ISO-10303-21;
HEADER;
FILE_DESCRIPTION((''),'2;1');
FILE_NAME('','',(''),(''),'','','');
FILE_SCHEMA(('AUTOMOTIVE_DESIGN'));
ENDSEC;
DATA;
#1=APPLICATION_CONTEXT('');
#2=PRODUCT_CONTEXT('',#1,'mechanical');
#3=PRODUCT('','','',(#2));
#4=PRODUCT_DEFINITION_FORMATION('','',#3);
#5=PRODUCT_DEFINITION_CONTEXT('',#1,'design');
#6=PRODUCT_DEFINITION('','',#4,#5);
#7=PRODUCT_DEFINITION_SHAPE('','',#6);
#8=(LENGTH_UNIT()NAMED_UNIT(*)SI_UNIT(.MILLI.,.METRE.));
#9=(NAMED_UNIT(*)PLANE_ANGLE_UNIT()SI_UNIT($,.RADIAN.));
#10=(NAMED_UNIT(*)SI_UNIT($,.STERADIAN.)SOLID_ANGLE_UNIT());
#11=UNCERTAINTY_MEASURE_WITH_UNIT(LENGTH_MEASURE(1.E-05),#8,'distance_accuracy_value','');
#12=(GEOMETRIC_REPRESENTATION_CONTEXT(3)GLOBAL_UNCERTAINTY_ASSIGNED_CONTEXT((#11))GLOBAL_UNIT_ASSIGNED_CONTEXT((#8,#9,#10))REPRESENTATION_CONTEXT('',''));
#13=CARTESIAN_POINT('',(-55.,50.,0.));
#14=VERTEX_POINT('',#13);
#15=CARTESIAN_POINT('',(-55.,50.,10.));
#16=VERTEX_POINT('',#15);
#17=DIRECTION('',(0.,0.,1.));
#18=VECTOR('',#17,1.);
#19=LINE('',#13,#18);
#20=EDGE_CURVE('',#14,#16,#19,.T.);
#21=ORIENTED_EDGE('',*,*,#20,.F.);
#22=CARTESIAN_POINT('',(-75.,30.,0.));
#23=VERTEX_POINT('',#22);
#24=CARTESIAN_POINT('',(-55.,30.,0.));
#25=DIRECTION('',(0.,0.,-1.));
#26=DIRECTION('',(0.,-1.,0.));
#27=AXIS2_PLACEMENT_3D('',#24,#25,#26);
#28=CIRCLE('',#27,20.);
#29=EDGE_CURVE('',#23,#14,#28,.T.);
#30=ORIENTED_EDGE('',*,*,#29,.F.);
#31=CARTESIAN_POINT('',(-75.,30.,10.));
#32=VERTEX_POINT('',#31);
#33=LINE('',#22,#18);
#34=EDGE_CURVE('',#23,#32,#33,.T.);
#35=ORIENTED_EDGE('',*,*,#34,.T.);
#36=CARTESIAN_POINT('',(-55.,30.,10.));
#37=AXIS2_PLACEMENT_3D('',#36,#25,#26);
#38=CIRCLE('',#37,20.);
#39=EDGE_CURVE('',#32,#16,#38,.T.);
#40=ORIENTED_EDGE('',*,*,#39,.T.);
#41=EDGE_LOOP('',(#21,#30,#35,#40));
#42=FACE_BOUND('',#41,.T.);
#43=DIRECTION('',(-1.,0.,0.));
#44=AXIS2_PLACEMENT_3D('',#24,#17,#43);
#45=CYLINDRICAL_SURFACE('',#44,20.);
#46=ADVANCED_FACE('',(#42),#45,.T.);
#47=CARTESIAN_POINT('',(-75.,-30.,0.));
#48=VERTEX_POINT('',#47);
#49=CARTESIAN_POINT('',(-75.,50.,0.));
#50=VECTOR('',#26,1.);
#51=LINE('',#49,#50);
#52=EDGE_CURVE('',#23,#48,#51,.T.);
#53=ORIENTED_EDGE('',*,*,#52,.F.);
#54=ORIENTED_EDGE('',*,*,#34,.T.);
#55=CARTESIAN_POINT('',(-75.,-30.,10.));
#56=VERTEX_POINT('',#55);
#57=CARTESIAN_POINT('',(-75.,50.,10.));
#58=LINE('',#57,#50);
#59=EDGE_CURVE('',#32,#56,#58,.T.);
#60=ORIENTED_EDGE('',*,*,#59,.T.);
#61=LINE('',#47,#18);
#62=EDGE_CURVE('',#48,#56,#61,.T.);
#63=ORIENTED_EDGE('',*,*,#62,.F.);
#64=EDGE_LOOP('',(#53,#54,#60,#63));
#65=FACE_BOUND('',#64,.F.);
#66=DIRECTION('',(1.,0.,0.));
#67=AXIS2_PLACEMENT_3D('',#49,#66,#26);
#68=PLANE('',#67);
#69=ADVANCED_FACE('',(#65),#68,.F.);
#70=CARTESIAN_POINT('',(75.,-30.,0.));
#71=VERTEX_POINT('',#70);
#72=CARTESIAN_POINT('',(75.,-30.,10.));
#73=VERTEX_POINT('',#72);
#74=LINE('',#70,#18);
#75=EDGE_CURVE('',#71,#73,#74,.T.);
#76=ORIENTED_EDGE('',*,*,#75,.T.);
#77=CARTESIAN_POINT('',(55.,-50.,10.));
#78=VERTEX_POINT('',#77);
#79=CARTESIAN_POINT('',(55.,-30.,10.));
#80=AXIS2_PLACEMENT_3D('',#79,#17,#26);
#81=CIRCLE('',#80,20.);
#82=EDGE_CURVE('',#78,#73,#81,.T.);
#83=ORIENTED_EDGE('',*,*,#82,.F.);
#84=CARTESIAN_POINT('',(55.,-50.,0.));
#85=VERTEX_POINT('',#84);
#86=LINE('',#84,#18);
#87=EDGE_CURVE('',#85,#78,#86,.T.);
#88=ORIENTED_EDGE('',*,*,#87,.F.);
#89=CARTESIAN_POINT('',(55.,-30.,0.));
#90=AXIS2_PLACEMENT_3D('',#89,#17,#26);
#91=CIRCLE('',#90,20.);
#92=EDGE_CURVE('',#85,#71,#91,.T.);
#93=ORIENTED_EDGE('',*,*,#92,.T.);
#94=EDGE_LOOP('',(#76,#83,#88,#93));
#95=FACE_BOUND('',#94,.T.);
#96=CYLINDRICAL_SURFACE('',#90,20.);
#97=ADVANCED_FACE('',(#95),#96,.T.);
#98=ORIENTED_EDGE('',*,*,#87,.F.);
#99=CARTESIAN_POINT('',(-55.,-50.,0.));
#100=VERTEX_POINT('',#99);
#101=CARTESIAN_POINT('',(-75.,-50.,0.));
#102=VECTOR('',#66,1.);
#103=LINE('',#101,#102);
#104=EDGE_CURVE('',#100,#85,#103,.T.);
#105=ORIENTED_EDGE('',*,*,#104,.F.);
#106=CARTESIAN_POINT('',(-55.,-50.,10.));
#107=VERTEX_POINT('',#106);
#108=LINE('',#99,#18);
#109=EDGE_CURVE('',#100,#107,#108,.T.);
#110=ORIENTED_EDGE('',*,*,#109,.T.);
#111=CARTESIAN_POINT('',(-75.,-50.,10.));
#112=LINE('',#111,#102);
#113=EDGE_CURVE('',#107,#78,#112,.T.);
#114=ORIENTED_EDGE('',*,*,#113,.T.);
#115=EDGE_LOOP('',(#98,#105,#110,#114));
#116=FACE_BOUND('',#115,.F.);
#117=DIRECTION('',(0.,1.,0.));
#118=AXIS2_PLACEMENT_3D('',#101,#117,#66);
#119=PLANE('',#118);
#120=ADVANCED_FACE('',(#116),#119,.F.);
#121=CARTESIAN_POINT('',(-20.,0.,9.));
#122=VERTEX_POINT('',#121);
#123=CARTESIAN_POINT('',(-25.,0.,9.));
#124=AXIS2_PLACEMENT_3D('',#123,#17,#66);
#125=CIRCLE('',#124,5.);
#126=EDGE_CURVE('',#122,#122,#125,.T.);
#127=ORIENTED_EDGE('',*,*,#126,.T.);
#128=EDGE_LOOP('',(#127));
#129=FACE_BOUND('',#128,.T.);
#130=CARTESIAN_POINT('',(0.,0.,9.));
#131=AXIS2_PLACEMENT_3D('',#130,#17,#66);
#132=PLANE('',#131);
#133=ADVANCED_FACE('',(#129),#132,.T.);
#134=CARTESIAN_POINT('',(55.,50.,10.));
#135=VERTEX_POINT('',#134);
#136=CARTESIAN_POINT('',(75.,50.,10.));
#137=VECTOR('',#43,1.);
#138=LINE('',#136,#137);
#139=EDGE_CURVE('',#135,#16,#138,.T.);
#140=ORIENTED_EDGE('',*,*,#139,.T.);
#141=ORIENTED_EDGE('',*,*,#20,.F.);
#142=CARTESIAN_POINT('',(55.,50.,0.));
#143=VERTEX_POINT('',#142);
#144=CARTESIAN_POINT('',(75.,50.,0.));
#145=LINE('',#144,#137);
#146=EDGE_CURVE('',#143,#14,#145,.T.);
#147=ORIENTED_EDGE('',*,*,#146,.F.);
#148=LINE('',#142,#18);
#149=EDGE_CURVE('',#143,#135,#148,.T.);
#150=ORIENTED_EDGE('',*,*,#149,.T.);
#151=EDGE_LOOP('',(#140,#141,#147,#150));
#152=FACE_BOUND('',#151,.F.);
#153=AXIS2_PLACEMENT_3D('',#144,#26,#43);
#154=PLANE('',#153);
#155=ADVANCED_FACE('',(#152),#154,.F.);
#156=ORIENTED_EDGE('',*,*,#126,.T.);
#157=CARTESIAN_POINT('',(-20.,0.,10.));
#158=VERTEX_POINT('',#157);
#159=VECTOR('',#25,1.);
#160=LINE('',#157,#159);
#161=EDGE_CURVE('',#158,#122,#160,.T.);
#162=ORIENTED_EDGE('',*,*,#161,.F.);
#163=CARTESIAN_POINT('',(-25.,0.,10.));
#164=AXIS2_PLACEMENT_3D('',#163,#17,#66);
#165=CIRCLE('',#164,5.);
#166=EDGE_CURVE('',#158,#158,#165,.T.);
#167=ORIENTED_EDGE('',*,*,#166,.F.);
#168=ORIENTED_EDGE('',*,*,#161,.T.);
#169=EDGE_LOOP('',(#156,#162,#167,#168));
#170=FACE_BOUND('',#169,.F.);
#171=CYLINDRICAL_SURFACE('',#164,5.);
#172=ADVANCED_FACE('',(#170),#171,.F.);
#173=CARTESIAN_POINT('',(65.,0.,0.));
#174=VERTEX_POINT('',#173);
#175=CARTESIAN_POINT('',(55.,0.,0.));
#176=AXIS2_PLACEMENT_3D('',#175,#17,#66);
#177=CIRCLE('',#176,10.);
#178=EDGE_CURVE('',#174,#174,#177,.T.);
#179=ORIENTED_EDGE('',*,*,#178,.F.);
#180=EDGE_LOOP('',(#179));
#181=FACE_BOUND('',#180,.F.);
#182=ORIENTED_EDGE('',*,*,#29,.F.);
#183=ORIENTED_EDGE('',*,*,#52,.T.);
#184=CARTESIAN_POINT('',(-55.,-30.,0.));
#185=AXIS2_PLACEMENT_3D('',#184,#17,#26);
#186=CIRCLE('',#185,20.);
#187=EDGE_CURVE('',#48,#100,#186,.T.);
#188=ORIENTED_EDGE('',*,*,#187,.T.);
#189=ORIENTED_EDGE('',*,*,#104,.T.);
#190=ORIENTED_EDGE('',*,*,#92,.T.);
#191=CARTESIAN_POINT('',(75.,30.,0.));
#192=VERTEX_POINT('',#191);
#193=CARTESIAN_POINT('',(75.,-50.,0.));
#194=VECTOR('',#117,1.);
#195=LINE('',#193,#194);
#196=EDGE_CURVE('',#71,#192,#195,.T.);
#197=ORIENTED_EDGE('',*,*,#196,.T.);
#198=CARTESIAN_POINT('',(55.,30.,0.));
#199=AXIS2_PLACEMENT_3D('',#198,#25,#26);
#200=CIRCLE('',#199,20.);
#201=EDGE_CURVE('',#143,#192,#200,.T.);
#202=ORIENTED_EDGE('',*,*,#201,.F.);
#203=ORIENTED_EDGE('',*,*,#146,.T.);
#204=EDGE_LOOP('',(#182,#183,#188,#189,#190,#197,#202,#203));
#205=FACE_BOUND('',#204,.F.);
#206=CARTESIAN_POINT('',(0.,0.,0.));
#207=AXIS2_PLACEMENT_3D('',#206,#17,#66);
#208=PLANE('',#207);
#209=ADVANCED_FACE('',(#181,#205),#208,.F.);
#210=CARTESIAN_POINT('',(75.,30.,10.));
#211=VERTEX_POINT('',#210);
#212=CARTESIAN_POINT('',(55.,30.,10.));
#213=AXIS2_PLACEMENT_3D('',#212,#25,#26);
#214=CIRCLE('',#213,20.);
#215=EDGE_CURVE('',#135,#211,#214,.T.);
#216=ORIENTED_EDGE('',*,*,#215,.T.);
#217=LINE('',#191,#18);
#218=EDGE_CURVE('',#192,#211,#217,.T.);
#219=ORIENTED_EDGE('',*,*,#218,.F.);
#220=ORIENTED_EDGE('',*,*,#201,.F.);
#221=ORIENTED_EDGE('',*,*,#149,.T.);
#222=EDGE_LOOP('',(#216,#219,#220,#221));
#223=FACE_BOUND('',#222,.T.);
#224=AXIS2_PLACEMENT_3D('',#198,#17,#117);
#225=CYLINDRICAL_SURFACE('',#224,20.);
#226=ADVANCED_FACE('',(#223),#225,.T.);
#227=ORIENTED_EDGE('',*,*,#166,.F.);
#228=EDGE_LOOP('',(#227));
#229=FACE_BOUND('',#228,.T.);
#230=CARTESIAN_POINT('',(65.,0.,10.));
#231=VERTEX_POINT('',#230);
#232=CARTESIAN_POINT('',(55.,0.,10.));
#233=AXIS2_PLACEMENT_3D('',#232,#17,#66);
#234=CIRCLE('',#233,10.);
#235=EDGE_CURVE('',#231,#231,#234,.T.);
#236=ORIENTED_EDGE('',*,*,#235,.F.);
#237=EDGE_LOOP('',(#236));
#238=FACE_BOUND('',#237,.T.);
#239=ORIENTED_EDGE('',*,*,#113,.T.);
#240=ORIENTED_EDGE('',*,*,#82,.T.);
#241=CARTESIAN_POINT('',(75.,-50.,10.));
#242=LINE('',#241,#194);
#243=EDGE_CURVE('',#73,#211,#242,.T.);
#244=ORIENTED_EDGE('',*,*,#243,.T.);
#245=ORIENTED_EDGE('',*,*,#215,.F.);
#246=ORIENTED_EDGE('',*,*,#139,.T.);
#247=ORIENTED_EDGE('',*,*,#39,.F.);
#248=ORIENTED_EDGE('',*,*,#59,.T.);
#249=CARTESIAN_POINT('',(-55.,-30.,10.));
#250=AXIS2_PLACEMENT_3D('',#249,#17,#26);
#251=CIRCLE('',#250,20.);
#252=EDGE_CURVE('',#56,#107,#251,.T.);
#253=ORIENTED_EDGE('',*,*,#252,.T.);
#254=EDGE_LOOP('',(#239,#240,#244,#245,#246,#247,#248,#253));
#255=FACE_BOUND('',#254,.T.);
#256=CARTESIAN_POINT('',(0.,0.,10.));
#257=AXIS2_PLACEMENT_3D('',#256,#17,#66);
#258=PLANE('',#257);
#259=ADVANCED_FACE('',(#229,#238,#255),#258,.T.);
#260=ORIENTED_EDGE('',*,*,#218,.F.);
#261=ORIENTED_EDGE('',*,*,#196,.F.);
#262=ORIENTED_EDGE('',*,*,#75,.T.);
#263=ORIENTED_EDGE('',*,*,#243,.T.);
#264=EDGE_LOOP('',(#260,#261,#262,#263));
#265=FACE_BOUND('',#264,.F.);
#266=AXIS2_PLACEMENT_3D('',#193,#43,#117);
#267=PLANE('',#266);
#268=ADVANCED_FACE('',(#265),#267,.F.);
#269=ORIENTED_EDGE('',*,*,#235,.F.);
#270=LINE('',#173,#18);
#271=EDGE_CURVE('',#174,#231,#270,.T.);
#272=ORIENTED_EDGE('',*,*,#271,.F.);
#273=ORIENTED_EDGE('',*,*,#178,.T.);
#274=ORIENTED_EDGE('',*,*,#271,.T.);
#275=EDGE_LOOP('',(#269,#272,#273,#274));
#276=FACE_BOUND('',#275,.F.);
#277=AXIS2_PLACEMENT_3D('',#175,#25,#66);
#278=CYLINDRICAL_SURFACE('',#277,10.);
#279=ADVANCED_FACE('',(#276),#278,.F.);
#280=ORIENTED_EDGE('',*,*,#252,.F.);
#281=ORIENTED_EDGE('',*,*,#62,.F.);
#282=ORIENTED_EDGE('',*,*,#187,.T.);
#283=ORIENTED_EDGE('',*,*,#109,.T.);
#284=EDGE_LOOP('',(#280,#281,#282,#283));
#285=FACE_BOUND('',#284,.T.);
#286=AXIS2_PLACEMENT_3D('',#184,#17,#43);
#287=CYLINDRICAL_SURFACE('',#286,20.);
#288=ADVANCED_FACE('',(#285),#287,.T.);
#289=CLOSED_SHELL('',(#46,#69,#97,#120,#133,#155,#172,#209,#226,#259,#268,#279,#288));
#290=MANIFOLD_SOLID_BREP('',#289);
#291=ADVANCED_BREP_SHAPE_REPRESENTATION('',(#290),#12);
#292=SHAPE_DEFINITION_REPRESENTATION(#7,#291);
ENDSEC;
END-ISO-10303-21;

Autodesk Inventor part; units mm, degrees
ref_plane "YZ Plane" through (0, 0, 0) normal (1, 0, 0) x (0, 1, 0)
ref_plane "XZ Plane" through (0, 0, 0) normal (0, 1, 0) x (-1, 0, 0)
ref_plane "XY Plane" through (0, 0, 0) normal (0, 0, 1) x (1, 0, 0)
sketch "Sketch1" plane through (0, 0, 0) normal (0, 0, 1) x (1, 0, 0)
  line L0 (-75, -50) -> (75, -50)
  line L1 (75, -50) -> (75, 50)
  line L2 (75, 50) -> (-75, 50)
  line L3 (-75, 50) -> (-75, -50)
  line L4 (-75, -50) -> (75, 50) construction
  line L5 (75, -50) -> (-75, 50) construction
  circle A0 centre (55, -30) radius 10
  circle A1 centre (55, 30) radius 10
  line L6 (0, 0) -> (75, 0) construction
  circle A2 centre (55, 0) radius 10
  dimension "d0" = 150
  dimension "d1" = 100
  dimension "d23" = 20
  dimension "d25" = 20
  dimension "d26" = 20
extrude "Plate1" add sketch "Sketch1" along normal blind 10 contours L3 L2 L1 L0 | A0 | A1
fillet "Corner Round1" radius 20 4 edges at (75, -50, 5) (-75, -50, 5) (-75, 50, 5) (75, 50, 5)
sketch "Sketch5" plane through (0, 0, 10) normal (0, 0, 1) x (1, 0, 0)
  line L0 (55, -50) -> (-55, -50) projected
  line L1 (-75, -30) -> (-75, 30) projected
  line L2 (-55, 50) -> (55, 50) projected
  circle A0 centre (-25, 0) radius 50
  circle A1 centre (-25, 0) radius 5
  point P0 (0, 0)
  dimension "d27" = 10
extrude "Extrusion2" cut sketch "Sketch5" against normal blind 1 contours A1
equation "\"d26\" = d25"
equation "\"d2\" = Thickness"
equation "\"BendReliefDepth\" = 0.5 * Thickness"
equation "\"TransitionRadius\" = BendRadius"
equation "\"JacobiRadiusSize\" = BendRadius"
equation "\"Thickness\" = 10"
equation "\"BendRadius\" = 5"
properties part number "PNS-783 leg floor plate" material "Steel"
